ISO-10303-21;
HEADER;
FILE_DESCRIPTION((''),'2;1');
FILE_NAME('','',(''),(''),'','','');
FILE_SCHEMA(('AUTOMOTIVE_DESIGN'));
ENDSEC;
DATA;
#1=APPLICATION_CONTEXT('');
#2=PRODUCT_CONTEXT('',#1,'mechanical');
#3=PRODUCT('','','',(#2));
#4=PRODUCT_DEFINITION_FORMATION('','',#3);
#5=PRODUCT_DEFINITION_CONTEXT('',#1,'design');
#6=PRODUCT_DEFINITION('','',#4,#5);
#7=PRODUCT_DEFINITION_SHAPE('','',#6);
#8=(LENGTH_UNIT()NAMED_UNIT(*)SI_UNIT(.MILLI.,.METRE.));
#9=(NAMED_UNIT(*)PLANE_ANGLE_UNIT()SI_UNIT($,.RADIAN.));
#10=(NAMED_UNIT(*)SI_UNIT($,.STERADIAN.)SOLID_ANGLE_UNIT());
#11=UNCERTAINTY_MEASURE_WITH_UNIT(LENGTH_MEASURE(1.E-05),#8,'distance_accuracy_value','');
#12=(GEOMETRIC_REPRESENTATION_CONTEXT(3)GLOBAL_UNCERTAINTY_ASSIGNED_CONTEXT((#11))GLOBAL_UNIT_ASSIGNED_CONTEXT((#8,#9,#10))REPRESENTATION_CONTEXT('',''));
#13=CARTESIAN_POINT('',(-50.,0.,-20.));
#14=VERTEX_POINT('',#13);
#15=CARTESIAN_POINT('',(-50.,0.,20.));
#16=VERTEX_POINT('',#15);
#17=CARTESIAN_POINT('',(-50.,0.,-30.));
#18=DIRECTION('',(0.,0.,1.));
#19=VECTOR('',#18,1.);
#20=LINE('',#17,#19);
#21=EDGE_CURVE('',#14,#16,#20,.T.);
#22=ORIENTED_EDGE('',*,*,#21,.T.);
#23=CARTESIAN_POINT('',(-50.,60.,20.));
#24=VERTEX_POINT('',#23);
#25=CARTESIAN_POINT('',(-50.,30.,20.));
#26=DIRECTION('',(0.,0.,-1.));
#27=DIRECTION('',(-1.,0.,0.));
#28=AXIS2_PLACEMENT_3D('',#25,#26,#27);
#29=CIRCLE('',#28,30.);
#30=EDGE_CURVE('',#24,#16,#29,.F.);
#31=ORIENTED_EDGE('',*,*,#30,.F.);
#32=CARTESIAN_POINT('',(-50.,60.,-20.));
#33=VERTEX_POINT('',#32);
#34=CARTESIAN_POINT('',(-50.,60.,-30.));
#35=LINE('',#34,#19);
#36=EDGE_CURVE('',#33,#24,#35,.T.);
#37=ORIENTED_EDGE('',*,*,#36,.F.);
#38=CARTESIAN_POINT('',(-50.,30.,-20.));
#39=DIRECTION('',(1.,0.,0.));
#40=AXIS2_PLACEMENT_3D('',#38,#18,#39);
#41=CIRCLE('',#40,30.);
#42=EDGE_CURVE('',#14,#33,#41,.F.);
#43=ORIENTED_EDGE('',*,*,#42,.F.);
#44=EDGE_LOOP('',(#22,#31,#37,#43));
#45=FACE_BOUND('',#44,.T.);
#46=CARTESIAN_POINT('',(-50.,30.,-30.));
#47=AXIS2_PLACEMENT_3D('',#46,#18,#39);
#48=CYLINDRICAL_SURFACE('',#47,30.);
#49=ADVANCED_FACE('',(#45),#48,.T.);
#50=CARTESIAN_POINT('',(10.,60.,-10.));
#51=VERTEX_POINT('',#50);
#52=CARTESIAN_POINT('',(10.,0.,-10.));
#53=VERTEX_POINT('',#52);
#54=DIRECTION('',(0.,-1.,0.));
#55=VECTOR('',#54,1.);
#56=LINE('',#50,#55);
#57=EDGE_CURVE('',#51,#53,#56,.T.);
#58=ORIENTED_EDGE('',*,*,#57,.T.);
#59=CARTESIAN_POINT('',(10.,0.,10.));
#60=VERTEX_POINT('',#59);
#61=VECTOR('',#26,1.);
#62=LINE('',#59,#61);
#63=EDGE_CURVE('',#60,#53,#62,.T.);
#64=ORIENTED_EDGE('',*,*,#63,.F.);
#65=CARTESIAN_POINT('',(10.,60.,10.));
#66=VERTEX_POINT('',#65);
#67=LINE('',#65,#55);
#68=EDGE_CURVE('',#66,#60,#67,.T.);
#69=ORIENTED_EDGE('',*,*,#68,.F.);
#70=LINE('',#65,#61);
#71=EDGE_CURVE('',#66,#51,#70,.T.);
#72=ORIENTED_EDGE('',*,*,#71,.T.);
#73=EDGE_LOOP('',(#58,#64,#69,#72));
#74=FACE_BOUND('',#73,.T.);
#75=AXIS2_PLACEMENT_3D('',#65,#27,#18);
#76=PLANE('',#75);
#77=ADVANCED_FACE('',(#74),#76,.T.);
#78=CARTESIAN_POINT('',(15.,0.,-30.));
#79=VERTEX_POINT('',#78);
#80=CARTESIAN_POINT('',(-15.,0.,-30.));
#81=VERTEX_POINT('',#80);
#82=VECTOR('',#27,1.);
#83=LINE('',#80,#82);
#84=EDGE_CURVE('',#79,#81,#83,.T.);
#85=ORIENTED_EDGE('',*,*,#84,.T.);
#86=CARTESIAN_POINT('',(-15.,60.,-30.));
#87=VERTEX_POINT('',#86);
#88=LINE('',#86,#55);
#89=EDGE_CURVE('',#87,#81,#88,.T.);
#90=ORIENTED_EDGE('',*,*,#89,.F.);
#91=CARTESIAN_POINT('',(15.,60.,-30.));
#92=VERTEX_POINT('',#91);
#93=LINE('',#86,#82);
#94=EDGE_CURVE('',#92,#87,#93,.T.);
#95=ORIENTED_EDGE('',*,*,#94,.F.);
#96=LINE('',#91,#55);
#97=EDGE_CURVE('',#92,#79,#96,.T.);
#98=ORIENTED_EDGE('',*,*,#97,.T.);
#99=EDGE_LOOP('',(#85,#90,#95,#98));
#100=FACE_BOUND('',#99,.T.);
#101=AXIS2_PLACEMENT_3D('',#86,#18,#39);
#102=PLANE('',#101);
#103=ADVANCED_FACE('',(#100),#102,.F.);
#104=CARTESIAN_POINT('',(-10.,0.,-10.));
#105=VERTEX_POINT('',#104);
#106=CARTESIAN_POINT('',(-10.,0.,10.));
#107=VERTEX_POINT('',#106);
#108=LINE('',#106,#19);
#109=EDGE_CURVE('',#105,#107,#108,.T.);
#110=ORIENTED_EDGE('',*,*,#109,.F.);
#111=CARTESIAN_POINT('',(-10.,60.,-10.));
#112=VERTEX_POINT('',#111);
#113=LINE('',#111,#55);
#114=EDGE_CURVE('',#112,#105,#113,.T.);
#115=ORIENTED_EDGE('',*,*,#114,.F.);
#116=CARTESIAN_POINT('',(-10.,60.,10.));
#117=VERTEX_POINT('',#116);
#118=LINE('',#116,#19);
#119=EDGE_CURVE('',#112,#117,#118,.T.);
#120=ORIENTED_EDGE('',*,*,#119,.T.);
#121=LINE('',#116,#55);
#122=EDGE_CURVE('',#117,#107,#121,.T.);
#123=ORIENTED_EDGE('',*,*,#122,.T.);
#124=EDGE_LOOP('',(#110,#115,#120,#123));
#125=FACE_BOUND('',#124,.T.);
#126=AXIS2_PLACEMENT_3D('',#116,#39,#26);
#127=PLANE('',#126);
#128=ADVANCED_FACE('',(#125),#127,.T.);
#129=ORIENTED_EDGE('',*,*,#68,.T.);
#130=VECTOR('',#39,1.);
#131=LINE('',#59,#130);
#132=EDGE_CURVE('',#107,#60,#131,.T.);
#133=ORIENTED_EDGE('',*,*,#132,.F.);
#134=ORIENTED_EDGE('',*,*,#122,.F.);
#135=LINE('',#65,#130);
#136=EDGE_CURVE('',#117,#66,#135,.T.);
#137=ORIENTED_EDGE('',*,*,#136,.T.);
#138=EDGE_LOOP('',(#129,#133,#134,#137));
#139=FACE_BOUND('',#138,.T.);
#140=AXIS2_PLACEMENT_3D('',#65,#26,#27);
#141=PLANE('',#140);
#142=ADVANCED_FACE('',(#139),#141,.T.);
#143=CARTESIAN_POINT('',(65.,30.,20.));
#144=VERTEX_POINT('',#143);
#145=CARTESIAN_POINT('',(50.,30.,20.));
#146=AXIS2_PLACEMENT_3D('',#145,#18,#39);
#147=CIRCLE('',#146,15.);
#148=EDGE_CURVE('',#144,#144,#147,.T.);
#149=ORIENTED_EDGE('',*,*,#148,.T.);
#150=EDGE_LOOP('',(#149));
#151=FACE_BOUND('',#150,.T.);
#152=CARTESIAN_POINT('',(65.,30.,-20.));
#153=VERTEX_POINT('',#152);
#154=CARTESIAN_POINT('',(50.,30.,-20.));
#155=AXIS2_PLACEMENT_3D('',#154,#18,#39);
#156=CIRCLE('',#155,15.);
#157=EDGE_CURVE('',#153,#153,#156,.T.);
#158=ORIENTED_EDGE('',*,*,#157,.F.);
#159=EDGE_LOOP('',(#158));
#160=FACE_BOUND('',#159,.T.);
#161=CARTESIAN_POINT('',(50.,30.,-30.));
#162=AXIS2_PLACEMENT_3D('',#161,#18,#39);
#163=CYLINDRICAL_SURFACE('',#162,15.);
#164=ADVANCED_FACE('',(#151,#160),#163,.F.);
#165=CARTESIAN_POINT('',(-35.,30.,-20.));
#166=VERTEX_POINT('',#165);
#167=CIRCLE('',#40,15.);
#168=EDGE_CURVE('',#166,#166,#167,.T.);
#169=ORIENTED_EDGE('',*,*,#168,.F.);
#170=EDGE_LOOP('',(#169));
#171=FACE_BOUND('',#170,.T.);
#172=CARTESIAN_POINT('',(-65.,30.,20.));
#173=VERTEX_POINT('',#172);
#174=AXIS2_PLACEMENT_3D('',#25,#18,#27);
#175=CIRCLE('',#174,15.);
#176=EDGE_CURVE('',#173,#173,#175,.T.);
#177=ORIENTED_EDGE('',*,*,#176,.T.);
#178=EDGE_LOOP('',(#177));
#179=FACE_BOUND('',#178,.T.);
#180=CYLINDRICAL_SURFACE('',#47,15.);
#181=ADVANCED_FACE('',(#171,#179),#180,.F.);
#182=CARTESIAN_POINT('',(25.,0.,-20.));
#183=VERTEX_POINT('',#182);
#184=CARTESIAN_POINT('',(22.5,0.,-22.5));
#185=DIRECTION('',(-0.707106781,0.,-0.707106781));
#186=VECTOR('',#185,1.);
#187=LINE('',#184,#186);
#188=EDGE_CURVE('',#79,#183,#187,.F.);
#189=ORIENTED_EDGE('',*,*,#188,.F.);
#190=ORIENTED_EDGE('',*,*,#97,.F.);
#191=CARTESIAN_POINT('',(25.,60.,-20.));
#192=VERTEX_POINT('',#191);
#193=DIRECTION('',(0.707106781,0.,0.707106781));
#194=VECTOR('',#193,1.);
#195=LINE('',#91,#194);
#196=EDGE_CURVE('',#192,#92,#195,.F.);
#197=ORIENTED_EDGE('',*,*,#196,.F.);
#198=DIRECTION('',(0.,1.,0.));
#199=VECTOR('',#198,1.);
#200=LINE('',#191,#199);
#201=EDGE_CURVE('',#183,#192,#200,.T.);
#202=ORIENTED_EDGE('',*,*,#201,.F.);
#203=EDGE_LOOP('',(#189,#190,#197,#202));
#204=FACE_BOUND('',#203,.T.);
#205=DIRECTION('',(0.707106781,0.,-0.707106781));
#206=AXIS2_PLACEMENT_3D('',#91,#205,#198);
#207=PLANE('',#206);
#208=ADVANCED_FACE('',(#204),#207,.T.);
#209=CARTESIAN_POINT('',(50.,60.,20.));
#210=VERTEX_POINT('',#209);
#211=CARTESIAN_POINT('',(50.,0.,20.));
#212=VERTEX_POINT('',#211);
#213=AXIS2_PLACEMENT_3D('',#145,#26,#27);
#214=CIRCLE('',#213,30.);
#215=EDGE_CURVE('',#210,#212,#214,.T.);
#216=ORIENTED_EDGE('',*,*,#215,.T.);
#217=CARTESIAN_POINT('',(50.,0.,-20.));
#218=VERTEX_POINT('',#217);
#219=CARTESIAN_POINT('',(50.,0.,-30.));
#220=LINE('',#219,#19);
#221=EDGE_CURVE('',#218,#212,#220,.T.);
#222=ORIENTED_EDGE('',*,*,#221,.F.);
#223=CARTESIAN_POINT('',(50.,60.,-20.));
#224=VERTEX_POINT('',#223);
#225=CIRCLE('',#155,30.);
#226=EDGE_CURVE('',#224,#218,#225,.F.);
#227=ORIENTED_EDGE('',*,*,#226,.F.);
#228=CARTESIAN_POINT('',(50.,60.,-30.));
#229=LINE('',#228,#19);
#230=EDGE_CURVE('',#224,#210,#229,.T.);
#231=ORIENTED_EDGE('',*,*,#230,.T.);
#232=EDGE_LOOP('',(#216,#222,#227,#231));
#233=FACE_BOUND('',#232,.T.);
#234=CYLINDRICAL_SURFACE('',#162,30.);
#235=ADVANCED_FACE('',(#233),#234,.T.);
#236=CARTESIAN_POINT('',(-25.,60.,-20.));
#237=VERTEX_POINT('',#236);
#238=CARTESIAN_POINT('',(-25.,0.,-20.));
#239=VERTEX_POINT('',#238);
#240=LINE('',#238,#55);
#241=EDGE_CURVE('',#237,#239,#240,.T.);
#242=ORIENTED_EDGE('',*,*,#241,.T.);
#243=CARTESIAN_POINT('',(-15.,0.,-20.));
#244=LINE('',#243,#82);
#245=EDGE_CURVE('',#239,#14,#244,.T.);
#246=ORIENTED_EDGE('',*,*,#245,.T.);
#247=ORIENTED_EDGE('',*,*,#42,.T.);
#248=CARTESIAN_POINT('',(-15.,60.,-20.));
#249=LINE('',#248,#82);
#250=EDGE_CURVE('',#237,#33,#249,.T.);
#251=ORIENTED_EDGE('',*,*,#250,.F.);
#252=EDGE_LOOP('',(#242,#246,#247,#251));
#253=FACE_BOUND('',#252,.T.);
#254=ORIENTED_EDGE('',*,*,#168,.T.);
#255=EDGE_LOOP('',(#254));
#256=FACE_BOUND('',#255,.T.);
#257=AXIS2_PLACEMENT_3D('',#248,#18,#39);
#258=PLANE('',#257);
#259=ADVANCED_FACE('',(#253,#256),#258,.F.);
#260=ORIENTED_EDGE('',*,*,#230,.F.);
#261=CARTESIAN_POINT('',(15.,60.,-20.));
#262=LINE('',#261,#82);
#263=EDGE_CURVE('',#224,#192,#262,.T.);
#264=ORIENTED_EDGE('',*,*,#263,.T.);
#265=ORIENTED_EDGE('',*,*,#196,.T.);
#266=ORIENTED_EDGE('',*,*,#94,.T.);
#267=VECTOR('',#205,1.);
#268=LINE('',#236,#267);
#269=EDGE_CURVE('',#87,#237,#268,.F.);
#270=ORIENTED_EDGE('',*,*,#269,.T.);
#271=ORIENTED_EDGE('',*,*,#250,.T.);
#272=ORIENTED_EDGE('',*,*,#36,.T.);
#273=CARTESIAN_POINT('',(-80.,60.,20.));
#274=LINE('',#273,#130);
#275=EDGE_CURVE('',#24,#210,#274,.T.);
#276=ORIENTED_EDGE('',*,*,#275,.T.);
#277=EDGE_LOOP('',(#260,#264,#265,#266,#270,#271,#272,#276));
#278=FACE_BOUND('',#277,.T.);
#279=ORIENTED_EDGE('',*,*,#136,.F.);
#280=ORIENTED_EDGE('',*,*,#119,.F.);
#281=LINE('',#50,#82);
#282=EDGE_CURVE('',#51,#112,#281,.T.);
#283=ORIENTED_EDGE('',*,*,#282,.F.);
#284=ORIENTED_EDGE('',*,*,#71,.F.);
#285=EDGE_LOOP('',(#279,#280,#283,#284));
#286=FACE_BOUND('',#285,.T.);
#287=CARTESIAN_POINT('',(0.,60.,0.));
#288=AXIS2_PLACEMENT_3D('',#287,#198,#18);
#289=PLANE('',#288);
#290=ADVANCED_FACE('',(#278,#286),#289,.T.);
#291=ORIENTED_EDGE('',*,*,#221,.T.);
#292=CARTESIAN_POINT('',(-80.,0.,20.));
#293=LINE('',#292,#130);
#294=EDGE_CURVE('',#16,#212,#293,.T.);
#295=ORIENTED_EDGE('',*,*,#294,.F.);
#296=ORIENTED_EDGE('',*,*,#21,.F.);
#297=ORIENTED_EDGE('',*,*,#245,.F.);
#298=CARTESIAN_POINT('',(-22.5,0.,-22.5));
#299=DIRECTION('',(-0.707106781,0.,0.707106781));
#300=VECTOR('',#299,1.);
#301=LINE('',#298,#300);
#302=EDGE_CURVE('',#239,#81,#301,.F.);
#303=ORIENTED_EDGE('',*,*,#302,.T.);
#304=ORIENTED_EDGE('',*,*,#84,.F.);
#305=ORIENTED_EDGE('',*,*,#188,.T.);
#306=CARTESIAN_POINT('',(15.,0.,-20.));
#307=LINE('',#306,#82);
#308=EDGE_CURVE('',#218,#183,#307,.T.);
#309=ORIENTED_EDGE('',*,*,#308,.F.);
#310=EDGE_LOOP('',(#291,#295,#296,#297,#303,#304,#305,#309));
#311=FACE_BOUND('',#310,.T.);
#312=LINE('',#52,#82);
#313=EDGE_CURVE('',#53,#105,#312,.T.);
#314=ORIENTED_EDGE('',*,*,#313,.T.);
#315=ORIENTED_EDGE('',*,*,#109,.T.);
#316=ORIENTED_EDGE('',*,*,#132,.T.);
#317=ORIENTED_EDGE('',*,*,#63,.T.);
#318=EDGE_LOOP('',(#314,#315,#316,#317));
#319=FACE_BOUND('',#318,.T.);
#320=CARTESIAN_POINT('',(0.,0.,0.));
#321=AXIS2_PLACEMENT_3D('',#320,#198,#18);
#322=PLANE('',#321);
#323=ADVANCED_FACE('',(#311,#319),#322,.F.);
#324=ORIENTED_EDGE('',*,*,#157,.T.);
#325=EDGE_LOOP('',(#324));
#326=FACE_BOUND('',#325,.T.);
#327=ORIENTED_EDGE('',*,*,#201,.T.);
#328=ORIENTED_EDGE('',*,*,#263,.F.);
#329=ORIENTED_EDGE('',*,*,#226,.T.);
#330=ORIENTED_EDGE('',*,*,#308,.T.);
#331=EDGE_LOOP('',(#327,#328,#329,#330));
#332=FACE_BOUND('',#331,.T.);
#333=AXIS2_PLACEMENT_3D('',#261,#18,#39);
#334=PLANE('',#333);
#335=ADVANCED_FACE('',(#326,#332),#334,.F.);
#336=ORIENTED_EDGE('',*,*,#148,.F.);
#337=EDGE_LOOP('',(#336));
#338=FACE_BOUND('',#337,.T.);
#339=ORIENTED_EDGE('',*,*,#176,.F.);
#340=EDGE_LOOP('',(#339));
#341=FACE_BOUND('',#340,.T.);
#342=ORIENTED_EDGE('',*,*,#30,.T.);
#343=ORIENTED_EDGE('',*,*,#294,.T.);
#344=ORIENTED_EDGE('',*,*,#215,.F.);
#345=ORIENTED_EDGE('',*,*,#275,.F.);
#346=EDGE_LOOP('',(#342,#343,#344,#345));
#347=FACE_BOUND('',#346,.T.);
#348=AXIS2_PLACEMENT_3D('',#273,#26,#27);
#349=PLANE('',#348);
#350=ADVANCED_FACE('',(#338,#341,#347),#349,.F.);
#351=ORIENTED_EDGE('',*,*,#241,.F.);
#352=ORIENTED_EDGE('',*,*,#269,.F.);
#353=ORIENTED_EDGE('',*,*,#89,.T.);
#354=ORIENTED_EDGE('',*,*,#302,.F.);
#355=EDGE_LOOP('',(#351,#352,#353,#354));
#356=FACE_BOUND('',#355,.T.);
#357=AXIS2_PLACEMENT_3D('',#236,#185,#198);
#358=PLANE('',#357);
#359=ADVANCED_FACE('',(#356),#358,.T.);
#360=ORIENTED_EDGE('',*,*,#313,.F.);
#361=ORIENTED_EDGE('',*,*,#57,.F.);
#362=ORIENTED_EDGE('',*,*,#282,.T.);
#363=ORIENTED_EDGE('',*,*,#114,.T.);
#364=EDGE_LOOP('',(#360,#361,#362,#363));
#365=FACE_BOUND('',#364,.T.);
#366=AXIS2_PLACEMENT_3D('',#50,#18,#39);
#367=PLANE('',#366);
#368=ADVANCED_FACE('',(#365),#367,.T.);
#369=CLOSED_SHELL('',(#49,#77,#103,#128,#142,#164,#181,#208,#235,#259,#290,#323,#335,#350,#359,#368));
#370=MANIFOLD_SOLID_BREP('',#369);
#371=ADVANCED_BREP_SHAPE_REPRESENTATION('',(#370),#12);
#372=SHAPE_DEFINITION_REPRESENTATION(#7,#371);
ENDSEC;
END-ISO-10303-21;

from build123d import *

# Parameters (mm, degrees)
SKETCH1_W               = 20
SKETCH1_H               = 20
BOSS_EXTRUDE1_DEPTH     = 60
CUT_EXTRUDE1_DEPTH      = 105.403065089
CUT_EXTRUDE1_DEPTH_BACK = 105.403065089
SKETCH2_R               = 15
CHAMFER2_SIZE           = 10


with BuildPart() as part:
    # Sketch1 → Boss-Extrude1 (new body)
    with BuildSketch(Plane(origin=(0, 0, 0), x_dir=(1, 0, 0), z_dir=(0, 1, 0))):
        Polygon((-15, 30), (15, 30), (15, 20), (80, 20), (80, -20), (-80, -20), (-80, 20), (-15, 20), align=None)
        Rectangle(SKETCH1_W, SKETCH1_H, mode=Mode.SUBTRACT)
    extrude(amount=BOSS_EXTRUDE1_DEPTH)

    # Sketch2 → Cut-Extrude1 (cut, two sides: drawn at the far end of the back side and taken through both)
    with BuildSketch(Plane.XY.offset(-CUT_EXTRUDE1_DEPTH_BACK)):
        with Locations((50, 30)):
            Circle(SKETCH2_R)
        with Locations((-50, 30)):
            Circle(SKETCH2_R)
        with BuildLine():
            Line((-50, 60), (-50, 75.524643477))
            Line((-50, 75.524643477), (-102.669470588, 75.524643477))
            Line((-102.669470588, 75.524643477), (-102.669470588, -8.464278737))
            Line((-102.669470588, -8.464278737), (-50, -8.464278737))
            Line((-50, -8.464278737), (-50, 0))
            ThreePointArc((-50, 0), (-80, 30), (-50, 60))
        make_face()
        with BuildLine():
            Line((102.669470588, -8.464278737), (50, -8.464278737))
            Line((50, -8.464278737), (50, 0))
            ThreePointArc((50, 0), (80, 30), (50, 60))
            Line((50, 60), (50, 75.524643477))
            Line((50, 75.524643477), (102.669470588, 75.524643477))
            Line((102.669470588, 75.524643477), (102.669470588, -8.464278737))
        make_face()
    extrude(amount=CUT_EXTRUDE1_DEPTH + CUT_EXTRUDE1_DEPTH_BACK, mode=Mode.SUBTRACT)

    # Chamfer2
    chamfer2_edges = [part.edges().sort_by_distance(p)[0] for p in [
        (15, 30, -20),
        (-15, 30, -20),
    ]]
    chamfer(chamfer2_edges, length=CHAMFER2_SIZE - 0.0001)  # a hair under: the kernel refuses the full size


solid = part.part
